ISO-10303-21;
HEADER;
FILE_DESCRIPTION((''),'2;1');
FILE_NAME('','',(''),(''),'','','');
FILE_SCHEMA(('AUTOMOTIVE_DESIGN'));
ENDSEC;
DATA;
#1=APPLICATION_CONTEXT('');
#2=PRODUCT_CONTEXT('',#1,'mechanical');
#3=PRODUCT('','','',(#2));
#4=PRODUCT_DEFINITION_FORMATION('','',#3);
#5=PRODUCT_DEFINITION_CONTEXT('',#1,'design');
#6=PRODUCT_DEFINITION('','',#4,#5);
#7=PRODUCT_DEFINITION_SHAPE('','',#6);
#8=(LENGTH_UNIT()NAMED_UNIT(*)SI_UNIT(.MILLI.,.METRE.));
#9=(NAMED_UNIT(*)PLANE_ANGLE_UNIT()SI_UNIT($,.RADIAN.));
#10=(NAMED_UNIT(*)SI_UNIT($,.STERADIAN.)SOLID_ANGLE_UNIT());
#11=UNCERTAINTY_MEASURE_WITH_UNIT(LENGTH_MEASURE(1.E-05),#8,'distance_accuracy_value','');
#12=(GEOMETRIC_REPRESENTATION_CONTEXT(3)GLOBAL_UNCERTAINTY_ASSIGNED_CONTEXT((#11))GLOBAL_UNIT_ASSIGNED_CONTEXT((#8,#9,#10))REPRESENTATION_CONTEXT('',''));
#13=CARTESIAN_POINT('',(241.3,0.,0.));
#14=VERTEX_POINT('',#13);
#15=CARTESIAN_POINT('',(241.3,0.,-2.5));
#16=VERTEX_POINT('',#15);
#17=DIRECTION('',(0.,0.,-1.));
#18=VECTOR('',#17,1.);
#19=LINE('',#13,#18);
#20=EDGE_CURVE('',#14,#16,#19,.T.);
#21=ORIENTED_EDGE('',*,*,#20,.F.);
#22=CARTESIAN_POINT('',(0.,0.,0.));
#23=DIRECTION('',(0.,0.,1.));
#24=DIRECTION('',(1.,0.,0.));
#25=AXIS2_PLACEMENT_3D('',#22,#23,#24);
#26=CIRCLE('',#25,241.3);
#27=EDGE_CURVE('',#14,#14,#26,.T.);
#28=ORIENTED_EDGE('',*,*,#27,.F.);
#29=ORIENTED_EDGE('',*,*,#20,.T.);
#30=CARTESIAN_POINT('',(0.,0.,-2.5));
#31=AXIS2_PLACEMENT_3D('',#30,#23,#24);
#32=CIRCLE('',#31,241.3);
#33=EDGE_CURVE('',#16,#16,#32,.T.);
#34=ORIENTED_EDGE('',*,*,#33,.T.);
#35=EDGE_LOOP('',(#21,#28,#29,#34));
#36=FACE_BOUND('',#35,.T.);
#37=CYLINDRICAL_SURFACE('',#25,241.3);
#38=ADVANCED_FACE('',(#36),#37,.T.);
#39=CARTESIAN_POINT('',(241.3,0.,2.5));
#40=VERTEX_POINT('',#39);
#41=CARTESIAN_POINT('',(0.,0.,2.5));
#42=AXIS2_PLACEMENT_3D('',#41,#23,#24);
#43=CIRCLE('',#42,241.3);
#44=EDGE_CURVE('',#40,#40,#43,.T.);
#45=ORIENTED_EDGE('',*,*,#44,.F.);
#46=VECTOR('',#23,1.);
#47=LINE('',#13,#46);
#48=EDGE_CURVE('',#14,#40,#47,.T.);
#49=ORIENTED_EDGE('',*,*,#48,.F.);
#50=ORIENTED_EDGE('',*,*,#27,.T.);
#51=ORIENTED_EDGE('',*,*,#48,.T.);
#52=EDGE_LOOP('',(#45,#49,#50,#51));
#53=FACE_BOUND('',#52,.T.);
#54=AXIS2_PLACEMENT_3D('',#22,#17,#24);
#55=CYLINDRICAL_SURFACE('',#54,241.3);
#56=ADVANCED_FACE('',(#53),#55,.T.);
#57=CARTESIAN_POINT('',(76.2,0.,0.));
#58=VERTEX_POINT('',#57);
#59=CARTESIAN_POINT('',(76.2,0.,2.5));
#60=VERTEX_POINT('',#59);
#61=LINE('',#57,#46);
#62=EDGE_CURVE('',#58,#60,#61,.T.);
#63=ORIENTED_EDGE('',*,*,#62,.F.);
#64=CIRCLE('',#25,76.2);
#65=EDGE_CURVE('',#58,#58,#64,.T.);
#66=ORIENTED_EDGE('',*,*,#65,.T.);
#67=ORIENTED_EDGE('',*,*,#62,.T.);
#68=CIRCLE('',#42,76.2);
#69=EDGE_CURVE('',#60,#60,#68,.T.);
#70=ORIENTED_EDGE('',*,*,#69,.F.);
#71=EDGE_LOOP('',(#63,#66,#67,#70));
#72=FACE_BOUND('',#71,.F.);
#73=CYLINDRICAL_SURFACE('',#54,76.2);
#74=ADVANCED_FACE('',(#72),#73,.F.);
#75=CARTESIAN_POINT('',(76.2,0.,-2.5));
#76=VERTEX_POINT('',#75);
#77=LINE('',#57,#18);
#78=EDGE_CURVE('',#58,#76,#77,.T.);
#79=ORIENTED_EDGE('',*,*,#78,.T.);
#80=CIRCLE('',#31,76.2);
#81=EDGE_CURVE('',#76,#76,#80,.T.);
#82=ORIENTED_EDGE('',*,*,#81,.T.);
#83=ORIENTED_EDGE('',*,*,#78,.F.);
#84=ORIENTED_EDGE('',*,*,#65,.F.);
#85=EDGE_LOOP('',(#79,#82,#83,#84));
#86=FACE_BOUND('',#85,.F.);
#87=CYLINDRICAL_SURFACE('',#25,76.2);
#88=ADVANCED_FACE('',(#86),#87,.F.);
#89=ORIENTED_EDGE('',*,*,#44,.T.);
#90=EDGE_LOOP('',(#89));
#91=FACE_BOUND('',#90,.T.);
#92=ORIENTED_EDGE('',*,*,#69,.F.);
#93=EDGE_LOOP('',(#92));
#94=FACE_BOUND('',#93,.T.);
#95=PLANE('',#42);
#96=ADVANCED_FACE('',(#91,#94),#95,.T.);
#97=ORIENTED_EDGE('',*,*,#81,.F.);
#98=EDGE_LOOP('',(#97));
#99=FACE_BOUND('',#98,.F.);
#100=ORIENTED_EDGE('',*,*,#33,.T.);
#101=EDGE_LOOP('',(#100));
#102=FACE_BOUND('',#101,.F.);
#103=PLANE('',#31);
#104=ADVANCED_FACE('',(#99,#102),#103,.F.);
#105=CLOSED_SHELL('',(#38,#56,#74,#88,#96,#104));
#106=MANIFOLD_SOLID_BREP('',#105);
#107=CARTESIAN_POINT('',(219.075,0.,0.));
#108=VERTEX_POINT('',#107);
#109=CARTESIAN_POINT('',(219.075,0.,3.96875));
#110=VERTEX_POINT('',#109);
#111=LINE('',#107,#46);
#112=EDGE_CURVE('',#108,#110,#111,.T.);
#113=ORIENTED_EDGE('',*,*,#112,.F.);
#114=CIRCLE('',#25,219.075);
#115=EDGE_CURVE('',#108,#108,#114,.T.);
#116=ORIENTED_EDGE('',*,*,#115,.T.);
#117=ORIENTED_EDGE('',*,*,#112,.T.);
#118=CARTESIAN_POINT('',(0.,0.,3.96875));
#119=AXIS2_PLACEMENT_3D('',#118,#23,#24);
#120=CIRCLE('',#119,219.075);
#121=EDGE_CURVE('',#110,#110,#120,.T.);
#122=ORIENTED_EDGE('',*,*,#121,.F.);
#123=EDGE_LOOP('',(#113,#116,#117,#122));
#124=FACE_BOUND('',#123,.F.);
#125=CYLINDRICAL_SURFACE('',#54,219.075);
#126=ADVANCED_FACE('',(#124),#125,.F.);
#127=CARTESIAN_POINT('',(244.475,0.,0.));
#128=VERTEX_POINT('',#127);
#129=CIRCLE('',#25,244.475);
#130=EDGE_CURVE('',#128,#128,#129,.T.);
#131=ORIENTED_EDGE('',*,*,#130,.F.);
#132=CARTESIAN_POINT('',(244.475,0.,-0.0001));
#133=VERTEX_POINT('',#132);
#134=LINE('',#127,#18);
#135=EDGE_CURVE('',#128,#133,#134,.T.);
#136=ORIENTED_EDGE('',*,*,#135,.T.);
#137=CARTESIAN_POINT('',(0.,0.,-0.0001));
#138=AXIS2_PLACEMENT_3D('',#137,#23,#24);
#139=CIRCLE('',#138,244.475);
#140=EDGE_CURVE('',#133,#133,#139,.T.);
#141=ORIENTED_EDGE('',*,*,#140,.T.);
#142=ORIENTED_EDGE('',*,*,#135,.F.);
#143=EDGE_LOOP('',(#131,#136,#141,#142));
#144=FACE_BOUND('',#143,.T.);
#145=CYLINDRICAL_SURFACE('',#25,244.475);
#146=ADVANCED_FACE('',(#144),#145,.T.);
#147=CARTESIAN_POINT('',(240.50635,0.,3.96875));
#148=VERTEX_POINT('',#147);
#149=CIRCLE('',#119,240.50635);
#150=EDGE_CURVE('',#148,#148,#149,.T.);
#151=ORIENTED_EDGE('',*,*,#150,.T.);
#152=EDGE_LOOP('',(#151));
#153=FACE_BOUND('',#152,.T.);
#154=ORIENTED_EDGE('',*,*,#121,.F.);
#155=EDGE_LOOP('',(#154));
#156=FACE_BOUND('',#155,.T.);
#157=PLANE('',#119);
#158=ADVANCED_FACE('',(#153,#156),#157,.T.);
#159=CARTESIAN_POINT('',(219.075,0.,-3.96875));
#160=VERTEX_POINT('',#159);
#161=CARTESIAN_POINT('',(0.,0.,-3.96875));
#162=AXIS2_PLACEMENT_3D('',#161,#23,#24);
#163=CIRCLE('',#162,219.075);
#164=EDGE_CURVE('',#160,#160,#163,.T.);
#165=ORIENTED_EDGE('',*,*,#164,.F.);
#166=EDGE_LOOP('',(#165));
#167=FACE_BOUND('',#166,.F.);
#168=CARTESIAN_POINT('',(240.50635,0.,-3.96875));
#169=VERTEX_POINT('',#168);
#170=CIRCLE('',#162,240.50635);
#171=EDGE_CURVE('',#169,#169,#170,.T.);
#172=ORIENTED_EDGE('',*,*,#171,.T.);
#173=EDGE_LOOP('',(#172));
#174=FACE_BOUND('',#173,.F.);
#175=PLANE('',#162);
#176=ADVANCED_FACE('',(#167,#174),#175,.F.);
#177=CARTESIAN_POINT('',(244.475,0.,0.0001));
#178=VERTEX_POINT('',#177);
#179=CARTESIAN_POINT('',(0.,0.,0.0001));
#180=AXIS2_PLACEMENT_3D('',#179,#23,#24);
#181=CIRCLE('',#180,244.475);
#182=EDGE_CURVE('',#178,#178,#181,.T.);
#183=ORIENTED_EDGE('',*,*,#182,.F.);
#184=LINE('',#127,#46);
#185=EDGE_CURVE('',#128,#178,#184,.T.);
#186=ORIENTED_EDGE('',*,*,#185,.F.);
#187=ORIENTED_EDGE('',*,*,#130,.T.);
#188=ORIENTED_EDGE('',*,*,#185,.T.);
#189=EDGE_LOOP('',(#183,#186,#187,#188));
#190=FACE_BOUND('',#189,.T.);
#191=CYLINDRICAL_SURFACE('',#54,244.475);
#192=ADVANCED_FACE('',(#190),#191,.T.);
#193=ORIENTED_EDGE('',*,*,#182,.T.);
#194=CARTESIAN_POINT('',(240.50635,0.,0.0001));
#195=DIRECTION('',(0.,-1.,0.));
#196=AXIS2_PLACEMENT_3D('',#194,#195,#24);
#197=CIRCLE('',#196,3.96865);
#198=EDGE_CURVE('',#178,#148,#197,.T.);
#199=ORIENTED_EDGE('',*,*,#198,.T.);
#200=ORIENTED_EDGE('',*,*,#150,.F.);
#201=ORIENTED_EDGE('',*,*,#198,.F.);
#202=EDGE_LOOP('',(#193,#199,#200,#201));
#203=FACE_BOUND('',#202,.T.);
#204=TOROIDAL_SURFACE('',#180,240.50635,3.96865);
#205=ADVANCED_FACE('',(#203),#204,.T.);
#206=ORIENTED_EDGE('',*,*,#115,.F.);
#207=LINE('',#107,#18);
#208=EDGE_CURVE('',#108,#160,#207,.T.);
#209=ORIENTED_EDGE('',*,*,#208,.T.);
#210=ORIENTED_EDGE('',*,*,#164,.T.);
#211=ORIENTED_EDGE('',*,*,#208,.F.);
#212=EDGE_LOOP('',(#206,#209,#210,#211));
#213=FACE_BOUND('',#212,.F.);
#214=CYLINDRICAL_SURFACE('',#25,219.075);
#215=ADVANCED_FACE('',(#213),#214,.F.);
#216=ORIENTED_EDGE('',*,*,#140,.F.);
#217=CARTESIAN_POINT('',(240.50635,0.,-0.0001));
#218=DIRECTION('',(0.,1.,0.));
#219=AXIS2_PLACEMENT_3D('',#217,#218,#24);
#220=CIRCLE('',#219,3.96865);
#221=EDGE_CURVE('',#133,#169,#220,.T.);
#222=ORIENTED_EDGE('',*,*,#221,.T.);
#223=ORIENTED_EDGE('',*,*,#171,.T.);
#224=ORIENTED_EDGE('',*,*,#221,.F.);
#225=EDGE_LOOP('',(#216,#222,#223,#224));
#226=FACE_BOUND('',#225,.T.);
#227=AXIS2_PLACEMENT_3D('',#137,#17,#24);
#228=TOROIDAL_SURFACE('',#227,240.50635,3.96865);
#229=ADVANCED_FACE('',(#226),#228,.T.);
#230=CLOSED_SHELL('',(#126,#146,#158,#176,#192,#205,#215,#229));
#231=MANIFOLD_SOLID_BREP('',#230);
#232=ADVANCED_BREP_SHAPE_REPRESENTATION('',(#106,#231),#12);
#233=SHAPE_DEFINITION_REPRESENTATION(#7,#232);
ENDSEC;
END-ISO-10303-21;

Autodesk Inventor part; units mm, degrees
ref_plane "YZ Plane" through (0, 0, 0) normal (1, 0, 0) x (0, 1, 0)
ref_plane "XZ Plane" through (0, 0, 0) normal (0, 1, 0) x (-1, 0, 0)
ref_plane "XY Plane" through (0, 0, 0) normal (0, 0, 1) x (1, 0, 0)
sketch "Sketch1" plane through (0, 0, 0) normal (0, 0, 1) x (1, 0, 0)
  circle A0 centre (0, 0) radius 76.2
  circle A1 centre (0, 0) radius 241.3
  dimension "d0" = 152.4
  dimension "d1" = 482.6
extrude "Plate1" add sketch "Sketch1" along normal mid plane 5
sketch "Sketch2" plane through (0, 0, 0) normal (0, 0, 1) x (1, 0, 0)
  circle A0 centre (0, 0) radius 244.475
  circle A1 centre (0, 0) radius 219.075
  dimension "d3" = 488.95
  dimension "d4" = 25.4
extrude "Extrusion1" add sketch "Sketch2" along normal mid plane 7.9375 separate body
full round fillet "Fillet1" bodies 2 first side at (3.4747, -235.7615, 3.9688) centre faces at (244.0374, -14.6206, 1.3229) (244.0374, -14.6206, -1.3229) second side at (3.4747, -235.7615, -3.9688)
equation "\"d2\" = Thickness"
equation "\"BendRadius\" = Thickness"
equation "\"BendReliefWidth\" = Thickness"
equation "\"BendReliefDepth\" = 0.5 * Thickness"
equation "\"TransitionRadius\" = BendRadius"
equation "\"JacobiRadiusSize\" = BendRadius"
equation "\"GapSize\" = Thickness"
equation "\"Thickness\" = 5"
properties part number "Disc" material "Polycarbonate, Clear"
